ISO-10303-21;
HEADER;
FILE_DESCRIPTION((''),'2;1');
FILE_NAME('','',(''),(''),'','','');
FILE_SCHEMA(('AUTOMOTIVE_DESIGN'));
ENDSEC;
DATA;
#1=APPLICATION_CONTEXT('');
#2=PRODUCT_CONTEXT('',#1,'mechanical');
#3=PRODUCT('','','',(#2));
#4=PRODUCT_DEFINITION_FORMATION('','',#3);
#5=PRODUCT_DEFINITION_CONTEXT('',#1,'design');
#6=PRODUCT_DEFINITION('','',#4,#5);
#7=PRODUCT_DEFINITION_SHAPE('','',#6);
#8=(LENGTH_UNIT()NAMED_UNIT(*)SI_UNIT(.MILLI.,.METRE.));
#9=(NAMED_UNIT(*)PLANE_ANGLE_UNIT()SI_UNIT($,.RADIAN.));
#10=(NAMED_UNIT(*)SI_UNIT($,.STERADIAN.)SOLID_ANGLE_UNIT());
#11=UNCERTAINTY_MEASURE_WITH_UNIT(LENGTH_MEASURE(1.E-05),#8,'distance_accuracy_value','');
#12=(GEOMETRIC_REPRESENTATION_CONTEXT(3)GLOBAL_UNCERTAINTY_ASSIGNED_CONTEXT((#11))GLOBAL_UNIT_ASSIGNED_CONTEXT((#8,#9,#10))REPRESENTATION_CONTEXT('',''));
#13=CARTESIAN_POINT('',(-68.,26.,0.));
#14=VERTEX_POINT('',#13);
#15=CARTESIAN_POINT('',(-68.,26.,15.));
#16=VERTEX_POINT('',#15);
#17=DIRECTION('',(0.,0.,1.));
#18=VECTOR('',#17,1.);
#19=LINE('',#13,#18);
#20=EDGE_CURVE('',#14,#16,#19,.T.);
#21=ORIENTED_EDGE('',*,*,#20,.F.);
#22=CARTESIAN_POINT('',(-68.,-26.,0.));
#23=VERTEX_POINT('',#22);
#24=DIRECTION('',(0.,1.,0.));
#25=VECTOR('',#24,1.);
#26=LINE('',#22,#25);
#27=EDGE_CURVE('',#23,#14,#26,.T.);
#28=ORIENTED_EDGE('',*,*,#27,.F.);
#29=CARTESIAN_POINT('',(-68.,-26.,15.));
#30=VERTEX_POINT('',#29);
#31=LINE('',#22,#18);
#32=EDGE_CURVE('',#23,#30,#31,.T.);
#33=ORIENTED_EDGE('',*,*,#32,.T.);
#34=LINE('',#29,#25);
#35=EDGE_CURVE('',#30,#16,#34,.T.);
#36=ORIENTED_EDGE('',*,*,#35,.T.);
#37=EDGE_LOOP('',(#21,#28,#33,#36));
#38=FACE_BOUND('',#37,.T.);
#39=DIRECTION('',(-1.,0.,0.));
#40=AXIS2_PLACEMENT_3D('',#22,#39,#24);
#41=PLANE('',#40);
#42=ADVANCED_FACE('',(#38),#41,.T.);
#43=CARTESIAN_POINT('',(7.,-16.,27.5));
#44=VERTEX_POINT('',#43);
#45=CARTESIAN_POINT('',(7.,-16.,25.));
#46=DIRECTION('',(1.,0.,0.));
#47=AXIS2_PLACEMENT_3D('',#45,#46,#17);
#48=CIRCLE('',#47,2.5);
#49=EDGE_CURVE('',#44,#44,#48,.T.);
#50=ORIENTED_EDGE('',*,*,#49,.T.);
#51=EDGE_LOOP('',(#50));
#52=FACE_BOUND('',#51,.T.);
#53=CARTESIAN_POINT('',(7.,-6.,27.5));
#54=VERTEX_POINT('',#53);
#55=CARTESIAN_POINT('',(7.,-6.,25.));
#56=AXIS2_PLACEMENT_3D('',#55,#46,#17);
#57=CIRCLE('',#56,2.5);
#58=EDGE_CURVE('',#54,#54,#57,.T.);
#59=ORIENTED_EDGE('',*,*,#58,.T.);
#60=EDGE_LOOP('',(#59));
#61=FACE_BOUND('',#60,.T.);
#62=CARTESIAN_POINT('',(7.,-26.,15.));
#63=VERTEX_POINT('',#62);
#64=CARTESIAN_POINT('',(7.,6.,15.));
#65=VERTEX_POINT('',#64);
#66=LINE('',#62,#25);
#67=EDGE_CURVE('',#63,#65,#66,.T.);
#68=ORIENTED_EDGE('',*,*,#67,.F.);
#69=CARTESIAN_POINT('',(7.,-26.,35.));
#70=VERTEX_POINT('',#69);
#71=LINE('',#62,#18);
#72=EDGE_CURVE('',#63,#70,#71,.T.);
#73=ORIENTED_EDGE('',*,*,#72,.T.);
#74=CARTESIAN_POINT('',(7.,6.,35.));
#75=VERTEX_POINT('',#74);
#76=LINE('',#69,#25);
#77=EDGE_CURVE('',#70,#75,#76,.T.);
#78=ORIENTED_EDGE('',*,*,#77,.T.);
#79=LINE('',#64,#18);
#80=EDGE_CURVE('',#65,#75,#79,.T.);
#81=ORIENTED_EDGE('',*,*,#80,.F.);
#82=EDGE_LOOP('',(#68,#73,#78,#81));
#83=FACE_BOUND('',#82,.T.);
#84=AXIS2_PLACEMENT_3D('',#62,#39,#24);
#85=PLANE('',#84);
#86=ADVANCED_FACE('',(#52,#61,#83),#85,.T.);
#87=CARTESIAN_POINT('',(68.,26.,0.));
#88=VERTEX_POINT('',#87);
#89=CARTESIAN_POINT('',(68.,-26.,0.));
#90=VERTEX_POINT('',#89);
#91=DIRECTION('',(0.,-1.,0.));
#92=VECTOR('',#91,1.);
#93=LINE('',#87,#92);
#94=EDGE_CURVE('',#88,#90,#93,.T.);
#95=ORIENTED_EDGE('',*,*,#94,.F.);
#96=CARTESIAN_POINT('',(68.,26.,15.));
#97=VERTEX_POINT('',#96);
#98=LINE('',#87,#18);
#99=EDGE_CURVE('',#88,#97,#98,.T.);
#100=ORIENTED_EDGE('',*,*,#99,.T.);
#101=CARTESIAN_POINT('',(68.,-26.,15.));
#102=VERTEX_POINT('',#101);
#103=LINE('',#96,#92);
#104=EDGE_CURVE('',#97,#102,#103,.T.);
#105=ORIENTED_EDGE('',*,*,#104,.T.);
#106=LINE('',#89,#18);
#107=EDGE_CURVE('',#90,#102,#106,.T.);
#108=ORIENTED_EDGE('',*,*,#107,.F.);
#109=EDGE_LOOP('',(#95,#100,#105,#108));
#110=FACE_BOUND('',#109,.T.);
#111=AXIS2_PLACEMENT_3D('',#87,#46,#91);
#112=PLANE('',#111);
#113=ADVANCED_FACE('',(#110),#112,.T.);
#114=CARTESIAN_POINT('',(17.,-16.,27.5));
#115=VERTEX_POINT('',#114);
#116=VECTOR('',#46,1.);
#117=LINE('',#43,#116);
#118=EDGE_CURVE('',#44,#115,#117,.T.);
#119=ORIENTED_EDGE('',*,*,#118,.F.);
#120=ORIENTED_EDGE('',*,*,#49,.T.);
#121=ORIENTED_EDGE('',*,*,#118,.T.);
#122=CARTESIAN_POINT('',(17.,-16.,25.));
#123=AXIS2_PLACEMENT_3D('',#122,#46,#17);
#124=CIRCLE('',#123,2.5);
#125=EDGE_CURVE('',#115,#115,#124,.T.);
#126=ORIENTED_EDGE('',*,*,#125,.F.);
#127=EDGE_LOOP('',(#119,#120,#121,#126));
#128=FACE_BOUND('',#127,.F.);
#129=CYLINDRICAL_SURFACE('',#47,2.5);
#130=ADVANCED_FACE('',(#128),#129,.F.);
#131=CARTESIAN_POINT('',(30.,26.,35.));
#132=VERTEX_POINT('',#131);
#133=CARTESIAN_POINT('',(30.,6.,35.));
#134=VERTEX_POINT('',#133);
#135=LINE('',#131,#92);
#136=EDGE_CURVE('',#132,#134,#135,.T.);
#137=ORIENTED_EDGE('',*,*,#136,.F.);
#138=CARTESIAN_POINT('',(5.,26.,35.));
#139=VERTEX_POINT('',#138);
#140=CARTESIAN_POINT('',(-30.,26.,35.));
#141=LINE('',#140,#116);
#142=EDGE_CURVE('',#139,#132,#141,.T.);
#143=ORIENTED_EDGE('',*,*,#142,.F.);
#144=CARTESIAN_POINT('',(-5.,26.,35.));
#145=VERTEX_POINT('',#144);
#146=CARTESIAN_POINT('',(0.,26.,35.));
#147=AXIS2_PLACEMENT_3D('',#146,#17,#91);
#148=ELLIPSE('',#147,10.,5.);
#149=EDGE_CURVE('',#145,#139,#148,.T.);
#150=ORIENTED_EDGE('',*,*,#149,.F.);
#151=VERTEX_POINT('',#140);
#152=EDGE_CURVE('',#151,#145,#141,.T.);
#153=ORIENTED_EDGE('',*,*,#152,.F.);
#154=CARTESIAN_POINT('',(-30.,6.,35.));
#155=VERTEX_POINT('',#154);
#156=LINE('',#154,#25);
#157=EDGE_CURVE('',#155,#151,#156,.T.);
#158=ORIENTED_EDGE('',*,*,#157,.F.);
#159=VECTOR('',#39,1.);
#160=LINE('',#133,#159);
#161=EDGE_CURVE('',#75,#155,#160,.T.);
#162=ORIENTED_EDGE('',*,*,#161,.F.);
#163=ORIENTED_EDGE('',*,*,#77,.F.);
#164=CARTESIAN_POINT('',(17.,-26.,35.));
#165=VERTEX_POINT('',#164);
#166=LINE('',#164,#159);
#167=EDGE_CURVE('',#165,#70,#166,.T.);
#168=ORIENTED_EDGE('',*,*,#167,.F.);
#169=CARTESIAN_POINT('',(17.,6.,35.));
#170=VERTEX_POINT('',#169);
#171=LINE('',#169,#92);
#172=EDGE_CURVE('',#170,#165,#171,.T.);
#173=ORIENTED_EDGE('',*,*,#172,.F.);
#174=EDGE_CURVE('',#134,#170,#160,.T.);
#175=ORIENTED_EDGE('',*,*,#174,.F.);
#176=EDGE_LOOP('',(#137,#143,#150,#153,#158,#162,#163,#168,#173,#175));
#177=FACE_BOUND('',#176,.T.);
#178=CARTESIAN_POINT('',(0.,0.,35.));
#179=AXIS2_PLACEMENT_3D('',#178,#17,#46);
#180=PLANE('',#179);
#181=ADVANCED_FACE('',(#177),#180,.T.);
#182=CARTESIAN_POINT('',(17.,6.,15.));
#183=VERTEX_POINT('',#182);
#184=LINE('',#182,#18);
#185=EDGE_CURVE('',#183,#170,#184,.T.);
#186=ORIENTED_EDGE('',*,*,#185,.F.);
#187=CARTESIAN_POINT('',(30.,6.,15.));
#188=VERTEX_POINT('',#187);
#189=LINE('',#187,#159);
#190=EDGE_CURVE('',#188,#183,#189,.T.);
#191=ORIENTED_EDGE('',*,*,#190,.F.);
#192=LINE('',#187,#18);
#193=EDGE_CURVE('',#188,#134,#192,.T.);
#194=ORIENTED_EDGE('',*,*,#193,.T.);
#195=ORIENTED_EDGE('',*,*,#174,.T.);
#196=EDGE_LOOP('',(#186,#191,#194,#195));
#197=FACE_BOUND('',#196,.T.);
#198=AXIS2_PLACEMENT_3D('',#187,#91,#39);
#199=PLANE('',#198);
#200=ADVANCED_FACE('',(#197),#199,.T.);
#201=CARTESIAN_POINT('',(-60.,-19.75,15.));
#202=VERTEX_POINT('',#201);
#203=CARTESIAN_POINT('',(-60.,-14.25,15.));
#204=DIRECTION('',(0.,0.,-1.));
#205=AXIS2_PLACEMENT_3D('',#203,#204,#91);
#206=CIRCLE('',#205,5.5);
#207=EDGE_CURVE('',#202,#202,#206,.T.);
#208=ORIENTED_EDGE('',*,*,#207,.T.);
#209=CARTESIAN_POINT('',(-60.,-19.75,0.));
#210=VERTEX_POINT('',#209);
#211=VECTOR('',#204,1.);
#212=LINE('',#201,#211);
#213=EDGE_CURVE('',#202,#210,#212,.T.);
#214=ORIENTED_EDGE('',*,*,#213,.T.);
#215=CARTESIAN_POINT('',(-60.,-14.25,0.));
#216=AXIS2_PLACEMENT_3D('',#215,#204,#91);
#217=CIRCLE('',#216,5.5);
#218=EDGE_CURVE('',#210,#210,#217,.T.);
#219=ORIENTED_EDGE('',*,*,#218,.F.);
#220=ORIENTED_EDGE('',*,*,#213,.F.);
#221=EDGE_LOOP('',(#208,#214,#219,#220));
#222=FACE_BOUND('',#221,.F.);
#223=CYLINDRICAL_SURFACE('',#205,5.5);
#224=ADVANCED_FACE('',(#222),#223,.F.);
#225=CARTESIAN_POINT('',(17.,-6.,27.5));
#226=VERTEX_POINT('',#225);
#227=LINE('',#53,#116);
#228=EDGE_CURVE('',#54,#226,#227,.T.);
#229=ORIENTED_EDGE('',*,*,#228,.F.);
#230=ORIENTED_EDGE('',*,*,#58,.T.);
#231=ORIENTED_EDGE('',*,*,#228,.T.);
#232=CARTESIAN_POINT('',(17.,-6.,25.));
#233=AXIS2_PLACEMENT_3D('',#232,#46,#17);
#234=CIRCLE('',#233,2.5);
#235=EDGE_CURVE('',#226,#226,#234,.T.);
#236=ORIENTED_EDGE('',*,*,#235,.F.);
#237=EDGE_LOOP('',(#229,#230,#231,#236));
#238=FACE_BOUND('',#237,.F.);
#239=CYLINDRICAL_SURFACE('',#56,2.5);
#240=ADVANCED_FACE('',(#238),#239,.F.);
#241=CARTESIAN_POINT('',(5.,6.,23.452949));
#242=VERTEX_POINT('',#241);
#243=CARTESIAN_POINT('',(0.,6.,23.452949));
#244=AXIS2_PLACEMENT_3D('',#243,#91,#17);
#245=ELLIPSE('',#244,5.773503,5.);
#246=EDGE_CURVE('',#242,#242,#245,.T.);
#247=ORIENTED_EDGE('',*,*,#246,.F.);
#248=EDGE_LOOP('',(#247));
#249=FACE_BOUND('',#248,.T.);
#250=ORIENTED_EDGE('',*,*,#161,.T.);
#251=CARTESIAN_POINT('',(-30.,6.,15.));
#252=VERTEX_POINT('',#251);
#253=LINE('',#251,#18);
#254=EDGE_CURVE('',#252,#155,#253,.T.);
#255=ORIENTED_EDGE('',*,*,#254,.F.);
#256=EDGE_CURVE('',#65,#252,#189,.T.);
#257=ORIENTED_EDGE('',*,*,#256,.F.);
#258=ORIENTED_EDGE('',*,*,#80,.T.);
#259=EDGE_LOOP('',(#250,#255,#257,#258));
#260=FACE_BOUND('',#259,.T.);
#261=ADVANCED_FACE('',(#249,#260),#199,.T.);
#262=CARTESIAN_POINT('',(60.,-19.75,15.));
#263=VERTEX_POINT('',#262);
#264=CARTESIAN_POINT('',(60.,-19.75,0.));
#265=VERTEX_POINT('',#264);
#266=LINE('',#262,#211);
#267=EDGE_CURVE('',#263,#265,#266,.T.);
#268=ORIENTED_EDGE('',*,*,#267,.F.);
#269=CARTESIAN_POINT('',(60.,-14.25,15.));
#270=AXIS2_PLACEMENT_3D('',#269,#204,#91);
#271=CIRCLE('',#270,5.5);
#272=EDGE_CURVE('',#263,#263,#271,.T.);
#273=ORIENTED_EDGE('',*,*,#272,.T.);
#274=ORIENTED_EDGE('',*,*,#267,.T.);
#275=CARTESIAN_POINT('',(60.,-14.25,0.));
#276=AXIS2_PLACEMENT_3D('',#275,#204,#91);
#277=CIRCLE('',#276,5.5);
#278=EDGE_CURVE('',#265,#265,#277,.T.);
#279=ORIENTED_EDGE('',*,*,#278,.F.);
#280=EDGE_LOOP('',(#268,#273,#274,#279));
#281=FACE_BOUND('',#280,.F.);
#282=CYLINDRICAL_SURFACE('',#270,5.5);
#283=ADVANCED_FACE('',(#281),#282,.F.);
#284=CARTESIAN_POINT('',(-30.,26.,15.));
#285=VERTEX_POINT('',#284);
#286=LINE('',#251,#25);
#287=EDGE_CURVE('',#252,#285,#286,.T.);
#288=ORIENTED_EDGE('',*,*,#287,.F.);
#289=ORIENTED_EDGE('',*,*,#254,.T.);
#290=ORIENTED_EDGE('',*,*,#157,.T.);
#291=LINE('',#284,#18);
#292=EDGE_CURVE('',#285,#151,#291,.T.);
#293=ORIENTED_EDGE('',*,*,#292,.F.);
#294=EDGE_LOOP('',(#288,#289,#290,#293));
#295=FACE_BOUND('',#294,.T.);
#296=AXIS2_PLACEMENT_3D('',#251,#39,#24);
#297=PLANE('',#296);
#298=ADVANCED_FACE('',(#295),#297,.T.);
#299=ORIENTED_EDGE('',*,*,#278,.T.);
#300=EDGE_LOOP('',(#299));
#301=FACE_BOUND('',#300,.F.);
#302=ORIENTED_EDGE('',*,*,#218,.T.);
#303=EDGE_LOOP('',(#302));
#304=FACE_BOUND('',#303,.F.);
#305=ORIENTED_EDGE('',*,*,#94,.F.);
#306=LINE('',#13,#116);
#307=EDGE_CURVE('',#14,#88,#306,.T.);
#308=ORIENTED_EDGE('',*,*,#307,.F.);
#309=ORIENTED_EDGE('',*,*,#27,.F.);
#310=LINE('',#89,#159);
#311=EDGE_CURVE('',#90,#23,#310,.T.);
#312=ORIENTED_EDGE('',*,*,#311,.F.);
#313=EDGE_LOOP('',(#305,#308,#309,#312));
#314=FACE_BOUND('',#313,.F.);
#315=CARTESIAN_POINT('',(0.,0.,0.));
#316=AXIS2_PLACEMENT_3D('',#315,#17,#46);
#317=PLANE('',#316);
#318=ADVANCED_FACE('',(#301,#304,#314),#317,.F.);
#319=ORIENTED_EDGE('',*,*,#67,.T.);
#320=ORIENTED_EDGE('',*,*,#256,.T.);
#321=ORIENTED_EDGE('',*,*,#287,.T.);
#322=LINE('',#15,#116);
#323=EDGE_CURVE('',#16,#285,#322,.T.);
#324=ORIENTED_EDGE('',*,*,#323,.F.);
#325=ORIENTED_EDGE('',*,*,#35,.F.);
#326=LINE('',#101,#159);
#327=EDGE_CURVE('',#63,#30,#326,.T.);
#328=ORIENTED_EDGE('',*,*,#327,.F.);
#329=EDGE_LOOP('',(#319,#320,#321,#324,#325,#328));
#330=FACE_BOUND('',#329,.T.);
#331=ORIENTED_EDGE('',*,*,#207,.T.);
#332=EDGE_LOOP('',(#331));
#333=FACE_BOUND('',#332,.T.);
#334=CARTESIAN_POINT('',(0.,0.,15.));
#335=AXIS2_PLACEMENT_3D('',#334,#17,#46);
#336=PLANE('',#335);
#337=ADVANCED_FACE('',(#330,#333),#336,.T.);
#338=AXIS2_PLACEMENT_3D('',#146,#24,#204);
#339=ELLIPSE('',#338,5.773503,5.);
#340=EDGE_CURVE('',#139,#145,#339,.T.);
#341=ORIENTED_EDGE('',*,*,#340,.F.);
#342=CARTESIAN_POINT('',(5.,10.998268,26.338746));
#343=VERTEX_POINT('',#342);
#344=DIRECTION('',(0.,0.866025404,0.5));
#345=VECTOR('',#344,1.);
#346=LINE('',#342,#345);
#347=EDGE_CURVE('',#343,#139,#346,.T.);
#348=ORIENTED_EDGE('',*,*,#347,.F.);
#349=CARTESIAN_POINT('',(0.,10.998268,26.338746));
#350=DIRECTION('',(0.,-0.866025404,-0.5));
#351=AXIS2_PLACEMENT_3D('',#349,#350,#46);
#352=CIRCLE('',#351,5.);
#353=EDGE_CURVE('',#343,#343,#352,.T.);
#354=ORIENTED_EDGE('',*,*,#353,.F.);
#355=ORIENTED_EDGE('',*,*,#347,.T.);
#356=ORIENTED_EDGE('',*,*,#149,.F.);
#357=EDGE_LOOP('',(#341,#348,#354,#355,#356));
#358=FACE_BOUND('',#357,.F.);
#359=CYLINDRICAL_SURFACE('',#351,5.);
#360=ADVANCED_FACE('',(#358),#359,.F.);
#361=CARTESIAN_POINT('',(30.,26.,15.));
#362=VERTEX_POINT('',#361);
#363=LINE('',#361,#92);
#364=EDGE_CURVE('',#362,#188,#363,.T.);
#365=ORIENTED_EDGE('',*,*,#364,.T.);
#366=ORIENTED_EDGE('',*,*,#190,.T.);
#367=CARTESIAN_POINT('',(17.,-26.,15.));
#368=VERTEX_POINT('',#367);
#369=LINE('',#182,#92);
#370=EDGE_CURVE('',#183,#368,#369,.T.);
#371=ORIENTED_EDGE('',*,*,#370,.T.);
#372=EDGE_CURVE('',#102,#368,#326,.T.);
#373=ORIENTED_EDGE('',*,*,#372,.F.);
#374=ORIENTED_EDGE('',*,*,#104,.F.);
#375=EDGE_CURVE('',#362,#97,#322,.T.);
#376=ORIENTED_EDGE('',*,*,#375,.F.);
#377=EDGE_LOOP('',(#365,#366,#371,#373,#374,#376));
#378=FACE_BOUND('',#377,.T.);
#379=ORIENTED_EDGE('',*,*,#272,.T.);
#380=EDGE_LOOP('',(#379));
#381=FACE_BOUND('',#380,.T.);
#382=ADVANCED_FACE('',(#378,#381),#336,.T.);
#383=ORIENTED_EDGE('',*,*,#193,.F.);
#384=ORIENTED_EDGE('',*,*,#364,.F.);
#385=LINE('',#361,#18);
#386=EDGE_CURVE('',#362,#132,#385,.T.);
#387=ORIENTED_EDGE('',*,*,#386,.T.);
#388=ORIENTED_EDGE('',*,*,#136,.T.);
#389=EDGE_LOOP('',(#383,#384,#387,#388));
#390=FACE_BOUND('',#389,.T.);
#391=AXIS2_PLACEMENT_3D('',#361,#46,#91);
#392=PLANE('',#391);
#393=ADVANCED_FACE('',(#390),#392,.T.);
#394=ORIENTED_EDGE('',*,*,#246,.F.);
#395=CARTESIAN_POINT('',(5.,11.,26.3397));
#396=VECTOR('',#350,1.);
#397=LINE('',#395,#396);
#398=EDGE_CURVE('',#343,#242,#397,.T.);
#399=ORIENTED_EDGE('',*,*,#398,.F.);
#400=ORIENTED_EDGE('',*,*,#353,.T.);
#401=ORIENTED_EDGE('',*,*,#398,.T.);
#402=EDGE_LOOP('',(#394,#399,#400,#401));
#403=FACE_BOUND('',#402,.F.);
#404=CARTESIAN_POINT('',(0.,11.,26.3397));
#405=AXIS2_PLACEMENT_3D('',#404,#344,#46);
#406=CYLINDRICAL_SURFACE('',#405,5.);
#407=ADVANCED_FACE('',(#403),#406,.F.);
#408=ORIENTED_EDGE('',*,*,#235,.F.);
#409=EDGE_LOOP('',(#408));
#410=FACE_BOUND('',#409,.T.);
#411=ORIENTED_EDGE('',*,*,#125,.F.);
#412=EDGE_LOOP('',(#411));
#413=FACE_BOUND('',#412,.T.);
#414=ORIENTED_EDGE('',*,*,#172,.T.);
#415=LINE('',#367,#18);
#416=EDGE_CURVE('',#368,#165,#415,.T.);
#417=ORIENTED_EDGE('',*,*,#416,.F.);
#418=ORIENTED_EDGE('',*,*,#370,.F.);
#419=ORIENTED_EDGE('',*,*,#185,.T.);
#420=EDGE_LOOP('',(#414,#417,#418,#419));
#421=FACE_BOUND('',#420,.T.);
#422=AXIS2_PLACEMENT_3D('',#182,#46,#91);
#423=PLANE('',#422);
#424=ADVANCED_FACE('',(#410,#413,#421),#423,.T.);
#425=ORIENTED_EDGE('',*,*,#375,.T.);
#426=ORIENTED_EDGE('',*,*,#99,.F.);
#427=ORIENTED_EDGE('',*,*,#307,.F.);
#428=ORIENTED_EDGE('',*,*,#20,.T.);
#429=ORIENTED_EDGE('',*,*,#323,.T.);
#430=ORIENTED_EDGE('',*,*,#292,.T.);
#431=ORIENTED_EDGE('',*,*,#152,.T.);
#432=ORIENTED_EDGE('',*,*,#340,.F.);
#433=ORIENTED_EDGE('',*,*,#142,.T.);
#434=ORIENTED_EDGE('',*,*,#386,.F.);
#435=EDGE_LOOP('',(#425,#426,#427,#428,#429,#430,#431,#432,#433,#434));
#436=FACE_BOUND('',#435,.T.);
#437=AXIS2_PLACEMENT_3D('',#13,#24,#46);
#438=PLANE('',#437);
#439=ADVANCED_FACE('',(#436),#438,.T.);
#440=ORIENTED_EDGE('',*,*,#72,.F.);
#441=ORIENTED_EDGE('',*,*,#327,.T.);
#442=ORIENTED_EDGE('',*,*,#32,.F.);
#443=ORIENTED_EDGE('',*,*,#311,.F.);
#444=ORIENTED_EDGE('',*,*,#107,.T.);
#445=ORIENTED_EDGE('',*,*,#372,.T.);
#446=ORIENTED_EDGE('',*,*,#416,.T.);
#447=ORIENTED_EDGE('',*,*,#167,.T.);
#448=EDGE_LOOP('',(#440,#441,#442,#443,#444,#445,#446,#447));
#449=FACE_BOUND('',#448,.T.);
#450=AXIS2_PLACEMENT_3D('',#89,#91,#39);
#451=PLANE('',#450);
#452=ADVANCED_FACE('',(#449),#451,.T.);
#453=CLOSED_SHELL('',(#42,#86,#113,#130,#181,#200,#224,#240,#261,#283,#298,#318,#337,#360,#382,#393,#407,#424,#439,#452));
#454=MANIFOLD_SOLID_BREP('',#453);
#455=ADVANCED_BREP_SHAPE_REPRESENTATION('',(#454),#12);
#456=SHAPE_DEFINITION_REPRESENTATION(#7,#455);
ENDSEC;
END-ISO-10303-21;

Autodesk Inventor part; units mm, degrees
ref_plane "YZ Plane" through (0, 0, 0) normal (1, 0, 0) x (0, 1, 0)
ref_plane "XZ Plane" through (0, 0, 0) normal (0, 1, 0) x (-1, 0, 0)
sketch "Sketch1" plane through (0, 0, 0) normal (0, 0, 1) x (1, 0, 0)
  line L0 (-68, 26) -> (68, 26)
  line L1 (68, 26) -> (68, -26)
  line L2 (68, -26) -> (-68, -26)
  line L3 (-68, -26) -> (-68, 26)
  point P0 (0, 0)
  point P1 (-68, 0)
  point P2 (0, 26)
  dimension "d0" = 136
  dimension "d1" = 52
extrude "Extrusion1" add sketch "Sketch1" along normal blind 15
sketch "Sketch9" plane through (0, 0, 15) normal (0, 0, 1) x (1, 0, 0)
  circle A0 centre (-60, -14.25) radius 4 projected
  line L0 (188.1551, -73.0673) -> (-511.8449, -73.0673) projected
  circle A1 centre (60, -14.25) radius 4 projected
  point P0 (0, 0)
hole "Hole3" at (-60, -14.25, 15) at (60, -14.25, 15) direction (0, 0, -1) diameter 11 end through all
sketch "Sketch10" plane through (0, 0, 15) normal (0, 0, 1) x (1, 0, 0)
  line L0 (30, 6) -> (-30, 6)
  line L1 (-30, 6) -> (-30, 26)
  line L2 (-30, 26) -> (30, 26)
  line L3 (30, 26) -> (30, 6)
  line L4 (-68, -26) -> (68, -26) projected
  line L5 (68, 26) -> (-68, 26) projected
  point P0 (0, 0)
  point P1 (0, 6)
  dimension "d47" = 60
  dimension "d56" = 20
extrude "Extrusion6" add sketch "Sketch10" along normal blind 20
ref_plane "Work Plane1" through (-30, 6, 35) normal (0, -0.8660254, -0.5) x (1, 0, 0)
sketch "Sketch11" plane through (-30, 6, 35) normal (0, -0.8660254, -0.5) x (1, 0, 0)
  circle A0 centre (30, -10) radius 5
  line L0 (0, 0) -> (60, 0) projected
  point P0 (30, -27.3109)
  point P1 (30, 0)
  dimension "d52" = 10
  dimension "d53" = 10
extrude "Extrusion7" cut sketch "Sketch11" against normal blind 33
sketch "Sketch12" plane through (0, 11, 26.3397) normal (0, 0.8660254, 0.5) x (1, 0, 0)
  circle A0 centre (0, 0) radius 5 projected
  point P0 (0, 17.3109)
extrude "Extrusion8" cut sketch "Sketch12" against normal up to surface surface through (-30, 6, 15) normal (0, -1, 0)
sketch "Sketch13" plane through (0, 0, 15) normal (0, 0, 1) x (1, 0, 0)
  line L0 (17, -26) -> (7, -26)
  line L1 (7, -26) -> (7, 6)
  line L2 (7, 6) -> (17, 6)
  line L3 (17, 6) -> (17, -26)
  line L4 (-30, 6) -> (30, 6) projected
  line L5 (-68, -26) -> (68, -26) projected
  ellipse E0 centre (0, 26) end of major axis (0, 36) minor radius 5 (-5, 26) -> (5, 26) ccw projected
  line L6 (5, 6) -> (-5, 6) projected
  point P0 (0, 0)
  dimension "d59" = 10
  dimension "d62" = 2
extrude "Extrusion9" add sketch "Sketch13" along normal up to surface (20 mm away)
sketch "Sketch14" plane through (7, -26, 15) normal (-1, 0, 0) x (0, 0, 1)
  line L0 (0, 0) -> (20, 0) projected
  point P0 (-15, 26)
  point P1 (10, 10)
  point P2 (10, 20)
  point P3 (10, 0)
  dimension "d65" = 10
  dimension "d66" = 10
hole "Hole4" at (7, -16, 25) at (7, -6, 25) direction (1, 0, 0) diameter 5 end through all
properties part number "0008-30-014"
